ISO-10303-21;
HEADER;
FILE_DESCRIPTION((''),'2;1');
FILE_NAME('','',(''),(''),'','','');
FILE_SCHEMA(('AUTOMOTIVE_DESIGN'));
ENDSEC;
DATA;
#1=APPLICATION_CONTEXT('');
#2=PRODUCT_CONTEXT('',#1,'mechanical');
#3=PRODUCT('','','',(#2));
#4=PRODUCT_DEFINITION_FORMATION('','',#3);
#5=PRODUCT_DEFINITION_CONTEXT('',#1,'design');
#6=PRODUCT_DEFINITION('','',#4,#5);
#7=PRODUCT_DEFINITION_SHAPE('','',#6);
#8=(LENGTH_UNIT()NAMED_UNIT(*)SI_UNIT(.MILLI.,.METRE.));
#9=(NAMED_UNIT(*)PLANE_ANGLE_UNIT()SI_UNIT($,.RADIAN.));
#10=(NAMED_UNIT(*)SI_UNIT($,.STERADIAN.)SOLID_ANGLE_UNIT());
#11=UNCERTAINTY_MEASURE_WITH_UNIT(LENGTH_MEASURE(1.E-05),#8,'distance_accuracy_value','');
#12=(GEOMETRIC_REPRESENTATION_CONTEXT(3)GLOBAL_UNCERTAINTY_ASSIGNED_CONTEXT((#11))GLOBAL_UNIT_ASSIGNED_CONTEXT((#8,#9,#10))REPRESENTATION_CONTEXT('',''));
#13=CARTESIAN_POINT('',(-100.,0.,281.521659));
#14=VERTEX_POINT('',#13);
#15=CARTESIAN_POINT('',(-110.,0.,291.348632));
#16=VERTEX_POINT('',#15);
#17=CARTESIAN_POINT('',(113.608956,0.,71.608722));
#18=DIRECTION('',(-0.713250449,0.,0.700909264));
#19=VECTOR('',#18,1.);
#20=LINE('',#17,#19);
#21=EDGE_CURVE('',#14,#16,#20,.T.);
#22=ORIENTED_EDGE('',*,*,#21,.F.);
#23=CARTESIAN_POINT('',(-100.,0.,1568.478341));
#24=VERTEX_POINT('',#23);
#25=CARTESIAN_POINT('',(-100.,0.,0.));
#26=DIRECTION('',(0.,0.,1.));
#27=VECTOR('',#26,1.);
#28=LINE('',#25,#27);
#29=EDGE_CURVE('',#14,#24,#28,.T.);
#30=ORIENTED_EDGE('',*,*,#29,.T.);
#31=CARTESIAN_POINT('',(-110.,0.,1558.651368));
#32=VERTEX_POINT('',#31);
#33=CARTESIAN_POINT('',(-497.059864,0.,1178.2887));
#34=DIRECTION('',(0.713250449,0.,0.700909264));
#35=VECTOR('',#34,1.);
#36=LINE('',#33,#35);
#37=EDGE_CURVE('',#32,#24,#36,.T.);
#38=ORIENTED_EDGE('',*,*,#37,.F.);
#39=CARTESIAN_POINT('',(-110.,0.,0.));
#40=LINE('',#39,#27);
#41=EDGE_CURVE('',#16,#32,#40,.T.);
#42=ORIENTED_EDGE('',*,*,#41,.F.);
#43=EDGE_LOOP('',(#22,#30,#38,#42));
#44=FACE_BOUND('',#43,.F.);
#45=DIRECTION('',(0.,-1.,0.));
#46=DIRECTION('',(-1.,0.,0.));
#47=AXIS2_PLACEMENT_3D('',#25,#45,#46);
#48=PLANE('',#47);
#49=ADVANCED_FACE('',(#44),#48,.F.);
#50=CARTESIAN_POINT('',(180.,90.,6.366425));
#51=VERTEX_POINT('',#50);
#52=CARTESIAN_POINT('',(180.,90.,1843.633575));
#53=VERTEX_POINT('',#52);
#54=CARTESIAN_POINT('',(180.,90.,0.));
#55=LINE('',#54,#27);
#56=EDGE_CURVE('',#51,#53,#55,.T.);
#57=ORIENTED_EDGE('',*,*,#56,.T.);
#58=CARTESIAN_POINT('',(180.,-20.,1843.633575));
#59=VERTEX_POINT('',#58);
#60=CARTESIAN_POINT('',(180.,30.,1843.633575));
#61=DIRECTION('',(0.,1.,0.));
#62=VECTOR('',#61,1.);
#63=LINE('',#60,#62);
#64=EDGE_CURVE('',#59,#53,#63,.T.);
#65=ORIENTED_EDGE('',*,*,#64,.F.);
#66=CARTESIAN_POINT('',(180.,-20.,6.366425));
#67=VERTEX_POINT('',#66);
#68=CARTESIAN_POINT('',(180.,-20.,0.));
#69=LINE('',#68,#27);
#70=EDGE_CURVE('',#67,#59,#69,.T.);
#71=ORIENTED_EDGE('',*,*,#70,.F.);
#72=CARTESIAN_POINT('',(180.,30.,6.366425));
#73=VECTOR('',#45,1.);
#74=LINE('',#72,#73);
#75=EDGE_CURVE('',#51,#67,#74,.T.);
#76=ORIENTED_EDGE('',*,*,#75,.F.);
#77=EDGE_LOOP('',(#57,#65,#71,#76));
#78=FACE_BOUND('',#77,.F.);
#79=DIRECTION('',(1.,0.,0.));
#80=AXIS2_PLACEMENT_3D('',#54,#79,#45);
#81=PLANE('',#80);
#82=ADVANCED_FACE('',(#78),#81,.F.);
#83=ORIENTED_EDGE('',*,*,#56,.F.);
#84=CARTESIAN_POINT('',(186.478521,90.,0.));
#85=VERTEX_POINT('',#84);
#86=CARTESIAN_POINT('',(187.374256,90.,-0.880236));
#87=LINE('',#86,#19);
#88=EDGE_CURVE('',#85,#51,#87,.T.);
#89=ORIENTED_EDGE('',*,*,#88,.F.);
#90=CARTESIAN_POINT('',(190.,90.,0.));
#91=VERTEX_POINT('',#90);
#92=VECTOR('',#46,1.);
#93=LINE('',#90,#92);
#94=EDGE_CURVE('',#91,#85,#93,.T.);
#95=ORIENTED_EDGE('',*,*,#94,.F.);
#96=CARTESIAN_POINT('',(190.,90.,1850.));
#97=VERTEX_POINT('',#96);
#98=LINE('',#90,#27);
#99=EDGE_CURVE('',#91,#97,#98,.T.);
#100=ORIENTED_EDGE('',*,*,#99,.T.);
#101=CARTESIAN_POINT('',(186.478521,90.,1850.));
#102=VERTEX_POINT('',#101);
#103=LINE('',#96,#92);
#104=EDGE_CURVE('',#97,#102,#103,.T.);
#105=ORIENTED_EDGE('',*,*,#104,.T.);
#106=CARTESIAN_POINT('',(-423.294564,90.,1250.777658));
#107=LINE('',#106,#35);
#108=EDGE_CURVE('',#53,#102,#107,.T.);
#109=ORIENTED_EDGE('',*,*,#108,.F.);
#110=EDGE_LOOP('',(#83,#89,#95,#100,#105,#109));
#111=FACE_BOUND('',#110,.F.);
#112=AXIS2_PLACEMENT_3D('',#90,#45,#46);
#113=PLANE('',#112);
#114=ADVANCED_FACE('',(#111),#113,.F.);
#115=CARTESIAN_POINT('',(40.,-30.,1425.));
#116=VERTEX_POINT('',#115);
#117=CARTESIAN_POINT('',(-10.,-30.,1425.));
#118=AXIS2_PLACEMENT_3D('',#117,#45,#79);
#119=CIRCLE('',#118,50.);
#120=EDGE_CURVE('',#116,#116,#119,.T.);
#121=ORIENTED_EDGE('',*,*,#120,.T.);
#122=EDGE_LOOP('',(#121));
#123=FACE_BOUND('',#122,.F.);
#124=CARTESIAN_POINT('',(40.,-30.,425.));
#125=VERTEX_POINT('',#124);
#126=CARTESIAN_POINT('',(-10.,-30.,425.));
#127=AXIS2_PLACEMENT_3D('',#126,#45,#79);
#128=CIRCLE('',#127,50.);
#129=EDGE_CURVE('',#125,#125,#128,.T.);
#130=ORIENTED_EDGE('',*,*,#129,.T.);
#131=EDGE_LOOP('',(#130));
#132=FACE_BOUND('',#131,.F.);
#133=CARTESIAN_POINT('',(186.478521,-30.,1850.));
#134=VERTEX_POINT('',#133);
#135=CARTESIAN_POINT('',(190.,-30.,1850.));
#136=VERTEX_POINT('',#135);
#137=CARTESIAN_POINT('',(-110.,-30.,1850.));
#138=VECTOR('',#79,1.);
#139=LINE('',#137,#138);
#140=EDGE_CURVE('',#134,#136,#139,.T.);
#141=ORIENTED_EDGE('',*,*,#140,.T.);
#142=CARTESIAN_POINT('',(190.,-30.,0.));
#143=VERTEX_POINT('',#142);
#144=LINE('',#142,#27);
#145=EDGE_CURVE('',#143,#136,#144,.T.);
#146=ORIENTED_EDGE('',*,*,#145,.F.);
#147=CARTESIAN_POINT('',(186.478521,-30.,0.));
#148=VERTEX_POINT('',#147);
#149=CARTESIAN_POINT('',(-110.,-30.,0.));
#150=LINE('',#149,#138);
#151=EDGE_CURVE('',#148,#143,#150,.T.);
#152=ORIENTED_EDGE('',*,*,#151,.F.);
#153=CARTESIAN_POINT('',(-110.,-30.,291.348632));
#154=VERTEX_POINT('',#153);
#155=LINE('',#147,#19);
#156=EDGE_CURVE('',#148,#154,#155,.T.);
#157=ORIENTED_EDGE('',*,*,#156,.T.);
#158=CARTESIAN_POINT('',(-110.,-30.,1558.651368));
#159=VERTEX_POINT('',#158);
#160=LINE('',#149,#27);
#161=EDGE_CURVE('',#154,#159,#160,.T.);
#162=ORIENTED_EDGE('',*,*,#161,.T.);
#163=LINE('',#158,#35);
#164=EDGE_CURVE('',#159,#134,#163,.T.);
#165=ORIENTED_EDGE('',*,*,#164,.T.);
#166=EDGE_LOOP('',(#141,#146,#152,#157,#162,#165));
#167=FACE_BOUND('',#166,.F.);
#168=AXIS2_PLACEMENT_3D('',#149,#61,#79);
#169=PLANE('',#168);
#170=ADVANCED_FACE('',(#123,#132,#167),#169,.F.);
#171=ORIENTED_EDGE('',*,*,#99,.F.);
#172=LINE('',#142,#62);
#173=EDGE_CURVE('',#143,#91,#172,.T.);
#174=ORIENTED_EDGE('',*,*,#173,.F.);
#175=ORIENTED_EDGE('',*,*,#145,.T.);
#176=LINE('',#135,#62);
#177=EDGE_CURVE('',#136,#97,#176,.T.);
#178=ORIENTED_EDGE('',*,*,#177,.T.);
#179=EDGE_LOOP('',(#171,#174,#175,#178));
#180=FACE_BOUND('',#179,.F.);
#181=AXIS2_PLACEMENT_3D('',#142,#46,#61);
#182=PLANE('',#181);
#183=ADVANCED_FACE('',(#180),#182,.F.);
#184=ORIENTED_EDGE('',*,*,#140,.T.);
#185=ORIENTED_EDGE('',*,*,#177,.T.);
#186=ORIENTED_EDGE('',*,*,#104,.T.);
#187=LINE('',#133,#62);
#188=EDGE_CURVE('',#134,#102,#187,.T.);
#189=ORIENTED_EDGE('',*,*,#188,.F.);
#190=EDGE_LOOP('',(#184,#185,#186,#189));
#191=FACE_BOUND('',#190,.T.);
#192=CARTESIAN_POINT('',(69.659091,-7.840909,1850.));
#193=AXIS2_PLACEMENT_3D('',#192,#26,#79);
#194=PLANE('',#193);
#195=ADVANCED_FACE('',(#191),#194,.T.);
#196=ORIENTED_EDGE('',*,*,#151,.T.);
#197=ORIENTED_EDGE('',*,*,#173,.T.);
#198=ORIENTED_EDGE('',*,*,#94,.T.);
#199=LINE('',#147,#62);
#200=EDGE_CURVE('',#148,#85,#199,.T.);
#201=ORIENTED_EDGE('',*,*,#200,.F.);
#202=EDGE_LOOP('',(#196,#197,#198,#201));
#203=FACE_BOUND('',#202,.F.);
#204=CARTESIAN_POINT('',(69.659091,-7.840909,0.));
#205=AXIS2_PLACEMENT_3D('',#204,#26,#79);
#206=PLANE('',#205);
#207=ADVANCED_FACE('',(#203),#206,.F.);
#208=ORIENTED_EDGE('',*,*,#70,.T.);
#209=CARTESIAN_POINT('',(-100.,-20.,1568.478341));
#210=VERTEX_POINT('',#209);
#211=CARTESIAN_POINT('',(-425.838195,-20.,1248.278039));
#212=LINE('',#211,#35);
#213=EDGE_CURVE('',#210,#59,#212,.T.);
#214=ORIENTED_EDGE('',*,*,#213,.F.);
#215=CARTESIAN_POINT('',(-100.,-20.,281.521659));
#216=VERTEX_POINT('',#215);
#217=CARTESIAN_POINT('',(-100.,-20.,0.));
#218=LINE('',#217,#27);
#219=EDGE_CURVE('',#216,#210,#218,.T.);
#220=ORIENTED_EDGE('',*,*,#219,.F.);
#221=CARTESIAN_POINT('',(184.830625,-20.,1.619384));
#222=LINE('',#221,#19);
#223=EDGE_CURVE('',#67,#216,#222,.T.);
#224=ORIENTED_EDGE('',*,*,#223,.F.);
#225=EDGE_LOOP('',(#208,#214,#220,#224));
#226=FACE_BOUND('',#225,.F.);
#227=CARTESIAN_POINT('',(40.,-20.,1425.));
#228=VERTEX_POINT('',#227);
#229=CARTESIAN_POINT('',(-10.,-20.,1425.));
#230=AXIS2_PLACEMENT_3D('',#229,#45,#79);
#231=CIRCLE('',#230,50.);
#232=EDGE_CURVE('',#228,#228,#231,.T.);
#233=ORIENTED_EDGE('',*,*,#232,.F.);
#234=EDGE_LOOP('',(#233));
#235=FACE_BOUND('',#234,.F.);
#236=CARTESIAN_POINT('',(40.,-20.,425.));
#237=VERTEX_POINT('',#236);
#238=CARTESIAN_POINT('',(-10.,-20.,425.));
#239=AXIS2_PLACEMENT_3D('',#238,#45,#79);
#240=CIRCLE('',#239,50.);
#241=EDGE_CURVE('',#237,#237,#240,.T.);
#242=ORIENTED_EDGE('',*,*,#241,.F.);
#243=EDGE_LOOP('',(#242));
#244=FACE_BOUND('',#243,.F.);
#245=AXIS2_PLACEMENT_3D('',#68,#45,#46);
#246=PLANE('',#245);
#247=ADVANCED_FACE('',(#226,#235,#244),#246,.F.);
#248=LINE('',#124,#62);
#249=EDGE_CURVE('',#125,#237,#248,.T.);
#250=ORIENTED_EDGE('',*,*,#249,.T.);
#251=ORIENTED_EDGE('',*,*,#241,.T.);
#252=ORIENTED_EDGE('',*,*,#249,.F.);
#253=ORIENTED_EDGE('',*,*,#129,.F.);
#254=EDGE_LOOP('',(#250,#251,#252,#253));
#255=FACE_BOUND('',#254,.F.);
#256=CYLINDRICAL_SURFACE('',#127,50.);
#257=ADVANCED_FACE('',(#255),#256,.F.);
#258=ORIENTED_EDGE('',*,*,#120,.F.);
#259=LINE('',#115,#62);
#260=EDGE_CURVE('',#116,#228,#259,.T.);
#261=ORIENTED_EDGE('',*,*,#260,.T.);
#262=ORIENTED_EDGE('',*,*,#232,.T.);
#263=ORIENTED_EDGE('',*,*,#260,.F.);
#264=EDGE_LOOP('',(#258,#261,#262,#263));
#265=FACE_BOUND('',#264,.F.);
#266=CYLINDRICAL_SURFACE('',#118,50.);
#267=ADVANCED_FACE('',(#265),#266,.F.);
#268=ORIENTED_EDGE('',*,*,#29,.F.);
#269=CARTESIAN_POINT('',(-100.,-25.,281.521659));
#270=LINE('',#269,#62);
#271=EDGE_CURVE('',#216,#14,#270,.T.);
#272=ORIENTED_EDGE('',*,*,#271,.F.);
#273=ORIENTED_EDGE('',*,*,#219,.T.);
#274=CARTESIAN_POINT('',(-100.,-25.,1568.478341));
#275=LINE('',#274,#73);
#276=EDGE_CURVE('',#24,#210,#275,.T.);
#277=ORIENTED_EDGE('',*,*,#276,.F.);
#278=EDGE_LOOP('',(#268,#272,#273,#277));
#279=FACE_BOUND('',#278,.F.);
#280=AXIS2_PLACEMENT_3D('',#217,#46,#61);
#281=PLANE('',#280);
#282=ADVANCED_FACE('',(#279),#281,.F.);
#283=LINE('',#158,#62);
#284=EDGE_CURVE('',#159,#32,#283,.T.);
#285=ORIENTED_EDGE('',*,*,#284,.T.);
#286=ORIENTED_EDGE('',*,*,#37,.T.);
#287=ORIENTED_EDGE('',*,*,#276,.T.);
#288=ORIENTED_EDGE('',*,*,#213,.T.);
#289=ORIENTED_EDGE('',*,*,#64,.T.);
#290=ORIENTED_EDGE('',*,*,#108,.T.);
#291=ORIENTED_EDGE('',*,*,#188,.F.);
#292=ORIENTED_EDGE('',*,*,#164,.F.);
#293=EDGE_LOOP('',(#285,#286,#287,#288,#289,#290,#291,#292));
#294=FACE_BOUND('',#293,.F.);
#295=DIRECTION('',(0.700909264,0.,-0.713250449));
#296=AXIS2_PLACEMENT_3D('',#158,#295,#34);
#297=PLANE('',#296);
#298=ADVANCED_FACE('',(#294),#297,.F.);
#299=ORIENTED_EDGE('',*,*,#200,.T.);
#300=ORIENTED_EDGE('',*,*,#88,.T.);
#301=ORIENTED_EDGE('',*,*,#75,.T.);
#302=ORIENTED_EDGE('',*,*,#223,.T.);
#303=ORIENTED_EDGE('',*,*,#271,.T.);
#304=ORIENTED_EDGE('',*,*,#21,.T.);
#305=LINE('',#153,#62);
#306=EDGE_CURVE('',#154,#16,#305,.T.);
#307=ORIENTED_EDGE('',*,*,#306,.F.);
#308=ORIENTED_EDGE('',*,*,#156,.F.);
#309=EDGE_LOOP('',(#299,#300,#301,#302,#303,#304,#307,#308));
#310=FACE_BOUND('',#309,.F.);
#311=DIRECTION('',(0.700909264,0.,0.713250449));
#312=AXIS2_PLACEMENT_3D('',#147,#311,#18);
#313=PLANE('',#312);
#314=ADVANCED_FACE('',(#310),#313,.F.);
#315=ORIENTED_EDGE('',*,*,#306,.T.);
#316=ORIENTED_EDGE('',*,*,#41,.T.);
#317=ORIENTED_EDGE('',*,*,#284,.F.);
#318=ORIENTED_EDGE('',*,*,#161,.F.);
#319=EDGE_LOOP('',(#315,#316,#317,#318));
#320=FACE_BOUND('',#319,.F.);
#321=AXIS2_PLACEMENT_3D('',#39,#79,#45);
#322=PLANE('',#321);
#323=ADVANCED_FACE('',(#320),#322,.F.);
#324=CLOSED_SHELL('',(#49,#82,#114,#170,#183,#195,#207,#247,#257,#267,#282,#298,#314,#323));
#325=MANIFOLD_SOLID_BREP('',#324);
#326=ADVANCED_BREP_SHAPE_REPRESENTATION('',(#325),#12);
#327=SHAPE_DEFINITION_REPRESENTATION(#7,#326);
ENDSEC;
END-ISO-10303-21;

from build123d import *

# Parameters (mm, degrees)
F1_DEPTH = 1850
F3_DEPTH = 200
F4_R     = 50
F5_DEPTH = 120.001


# Not quite as in the source:
# - a feature names something its author has since deleted; it is built from what else it names


with BuildPart() as f1:
    # F0 (on Top) → F1 (new body)
    with BuildSketch(Plane.XY):
        Polygon((-100, 0), (-110, 0), (-110, -30), (190, -30), (190, 90), (180, 90), (180, -20), (-100, -20), align=None)
    extrude(amount=F1_DEPTH)

    # F2 (on face) → F3 (cut)
    with BuildSketch(Plane.XZ.offset(30)):
        Polygon((186.4785214056, 0), (-110, 291.3486315578), (-110, 0), align=None)
        Polygon((-110, 1850), (-110, 1558.6513684422), (186.4785214056, 1850), align=None)
    extrude(amount=-F3_DEPTH, mode=Mode.SUBTRACT)

    # F4 (on face) → F5 (cut, through all)
    with BuildSketch(Plane.XZ.offset(30)):
        with Locations((-10, 425)):
            Circle(F4_R)
        with Locations((-10, 1425)):
            Circle(F4_R)
    extrude(amount=-F5_DEPTH, mode=Mode.SUBTRACT)


solid = f1.part
